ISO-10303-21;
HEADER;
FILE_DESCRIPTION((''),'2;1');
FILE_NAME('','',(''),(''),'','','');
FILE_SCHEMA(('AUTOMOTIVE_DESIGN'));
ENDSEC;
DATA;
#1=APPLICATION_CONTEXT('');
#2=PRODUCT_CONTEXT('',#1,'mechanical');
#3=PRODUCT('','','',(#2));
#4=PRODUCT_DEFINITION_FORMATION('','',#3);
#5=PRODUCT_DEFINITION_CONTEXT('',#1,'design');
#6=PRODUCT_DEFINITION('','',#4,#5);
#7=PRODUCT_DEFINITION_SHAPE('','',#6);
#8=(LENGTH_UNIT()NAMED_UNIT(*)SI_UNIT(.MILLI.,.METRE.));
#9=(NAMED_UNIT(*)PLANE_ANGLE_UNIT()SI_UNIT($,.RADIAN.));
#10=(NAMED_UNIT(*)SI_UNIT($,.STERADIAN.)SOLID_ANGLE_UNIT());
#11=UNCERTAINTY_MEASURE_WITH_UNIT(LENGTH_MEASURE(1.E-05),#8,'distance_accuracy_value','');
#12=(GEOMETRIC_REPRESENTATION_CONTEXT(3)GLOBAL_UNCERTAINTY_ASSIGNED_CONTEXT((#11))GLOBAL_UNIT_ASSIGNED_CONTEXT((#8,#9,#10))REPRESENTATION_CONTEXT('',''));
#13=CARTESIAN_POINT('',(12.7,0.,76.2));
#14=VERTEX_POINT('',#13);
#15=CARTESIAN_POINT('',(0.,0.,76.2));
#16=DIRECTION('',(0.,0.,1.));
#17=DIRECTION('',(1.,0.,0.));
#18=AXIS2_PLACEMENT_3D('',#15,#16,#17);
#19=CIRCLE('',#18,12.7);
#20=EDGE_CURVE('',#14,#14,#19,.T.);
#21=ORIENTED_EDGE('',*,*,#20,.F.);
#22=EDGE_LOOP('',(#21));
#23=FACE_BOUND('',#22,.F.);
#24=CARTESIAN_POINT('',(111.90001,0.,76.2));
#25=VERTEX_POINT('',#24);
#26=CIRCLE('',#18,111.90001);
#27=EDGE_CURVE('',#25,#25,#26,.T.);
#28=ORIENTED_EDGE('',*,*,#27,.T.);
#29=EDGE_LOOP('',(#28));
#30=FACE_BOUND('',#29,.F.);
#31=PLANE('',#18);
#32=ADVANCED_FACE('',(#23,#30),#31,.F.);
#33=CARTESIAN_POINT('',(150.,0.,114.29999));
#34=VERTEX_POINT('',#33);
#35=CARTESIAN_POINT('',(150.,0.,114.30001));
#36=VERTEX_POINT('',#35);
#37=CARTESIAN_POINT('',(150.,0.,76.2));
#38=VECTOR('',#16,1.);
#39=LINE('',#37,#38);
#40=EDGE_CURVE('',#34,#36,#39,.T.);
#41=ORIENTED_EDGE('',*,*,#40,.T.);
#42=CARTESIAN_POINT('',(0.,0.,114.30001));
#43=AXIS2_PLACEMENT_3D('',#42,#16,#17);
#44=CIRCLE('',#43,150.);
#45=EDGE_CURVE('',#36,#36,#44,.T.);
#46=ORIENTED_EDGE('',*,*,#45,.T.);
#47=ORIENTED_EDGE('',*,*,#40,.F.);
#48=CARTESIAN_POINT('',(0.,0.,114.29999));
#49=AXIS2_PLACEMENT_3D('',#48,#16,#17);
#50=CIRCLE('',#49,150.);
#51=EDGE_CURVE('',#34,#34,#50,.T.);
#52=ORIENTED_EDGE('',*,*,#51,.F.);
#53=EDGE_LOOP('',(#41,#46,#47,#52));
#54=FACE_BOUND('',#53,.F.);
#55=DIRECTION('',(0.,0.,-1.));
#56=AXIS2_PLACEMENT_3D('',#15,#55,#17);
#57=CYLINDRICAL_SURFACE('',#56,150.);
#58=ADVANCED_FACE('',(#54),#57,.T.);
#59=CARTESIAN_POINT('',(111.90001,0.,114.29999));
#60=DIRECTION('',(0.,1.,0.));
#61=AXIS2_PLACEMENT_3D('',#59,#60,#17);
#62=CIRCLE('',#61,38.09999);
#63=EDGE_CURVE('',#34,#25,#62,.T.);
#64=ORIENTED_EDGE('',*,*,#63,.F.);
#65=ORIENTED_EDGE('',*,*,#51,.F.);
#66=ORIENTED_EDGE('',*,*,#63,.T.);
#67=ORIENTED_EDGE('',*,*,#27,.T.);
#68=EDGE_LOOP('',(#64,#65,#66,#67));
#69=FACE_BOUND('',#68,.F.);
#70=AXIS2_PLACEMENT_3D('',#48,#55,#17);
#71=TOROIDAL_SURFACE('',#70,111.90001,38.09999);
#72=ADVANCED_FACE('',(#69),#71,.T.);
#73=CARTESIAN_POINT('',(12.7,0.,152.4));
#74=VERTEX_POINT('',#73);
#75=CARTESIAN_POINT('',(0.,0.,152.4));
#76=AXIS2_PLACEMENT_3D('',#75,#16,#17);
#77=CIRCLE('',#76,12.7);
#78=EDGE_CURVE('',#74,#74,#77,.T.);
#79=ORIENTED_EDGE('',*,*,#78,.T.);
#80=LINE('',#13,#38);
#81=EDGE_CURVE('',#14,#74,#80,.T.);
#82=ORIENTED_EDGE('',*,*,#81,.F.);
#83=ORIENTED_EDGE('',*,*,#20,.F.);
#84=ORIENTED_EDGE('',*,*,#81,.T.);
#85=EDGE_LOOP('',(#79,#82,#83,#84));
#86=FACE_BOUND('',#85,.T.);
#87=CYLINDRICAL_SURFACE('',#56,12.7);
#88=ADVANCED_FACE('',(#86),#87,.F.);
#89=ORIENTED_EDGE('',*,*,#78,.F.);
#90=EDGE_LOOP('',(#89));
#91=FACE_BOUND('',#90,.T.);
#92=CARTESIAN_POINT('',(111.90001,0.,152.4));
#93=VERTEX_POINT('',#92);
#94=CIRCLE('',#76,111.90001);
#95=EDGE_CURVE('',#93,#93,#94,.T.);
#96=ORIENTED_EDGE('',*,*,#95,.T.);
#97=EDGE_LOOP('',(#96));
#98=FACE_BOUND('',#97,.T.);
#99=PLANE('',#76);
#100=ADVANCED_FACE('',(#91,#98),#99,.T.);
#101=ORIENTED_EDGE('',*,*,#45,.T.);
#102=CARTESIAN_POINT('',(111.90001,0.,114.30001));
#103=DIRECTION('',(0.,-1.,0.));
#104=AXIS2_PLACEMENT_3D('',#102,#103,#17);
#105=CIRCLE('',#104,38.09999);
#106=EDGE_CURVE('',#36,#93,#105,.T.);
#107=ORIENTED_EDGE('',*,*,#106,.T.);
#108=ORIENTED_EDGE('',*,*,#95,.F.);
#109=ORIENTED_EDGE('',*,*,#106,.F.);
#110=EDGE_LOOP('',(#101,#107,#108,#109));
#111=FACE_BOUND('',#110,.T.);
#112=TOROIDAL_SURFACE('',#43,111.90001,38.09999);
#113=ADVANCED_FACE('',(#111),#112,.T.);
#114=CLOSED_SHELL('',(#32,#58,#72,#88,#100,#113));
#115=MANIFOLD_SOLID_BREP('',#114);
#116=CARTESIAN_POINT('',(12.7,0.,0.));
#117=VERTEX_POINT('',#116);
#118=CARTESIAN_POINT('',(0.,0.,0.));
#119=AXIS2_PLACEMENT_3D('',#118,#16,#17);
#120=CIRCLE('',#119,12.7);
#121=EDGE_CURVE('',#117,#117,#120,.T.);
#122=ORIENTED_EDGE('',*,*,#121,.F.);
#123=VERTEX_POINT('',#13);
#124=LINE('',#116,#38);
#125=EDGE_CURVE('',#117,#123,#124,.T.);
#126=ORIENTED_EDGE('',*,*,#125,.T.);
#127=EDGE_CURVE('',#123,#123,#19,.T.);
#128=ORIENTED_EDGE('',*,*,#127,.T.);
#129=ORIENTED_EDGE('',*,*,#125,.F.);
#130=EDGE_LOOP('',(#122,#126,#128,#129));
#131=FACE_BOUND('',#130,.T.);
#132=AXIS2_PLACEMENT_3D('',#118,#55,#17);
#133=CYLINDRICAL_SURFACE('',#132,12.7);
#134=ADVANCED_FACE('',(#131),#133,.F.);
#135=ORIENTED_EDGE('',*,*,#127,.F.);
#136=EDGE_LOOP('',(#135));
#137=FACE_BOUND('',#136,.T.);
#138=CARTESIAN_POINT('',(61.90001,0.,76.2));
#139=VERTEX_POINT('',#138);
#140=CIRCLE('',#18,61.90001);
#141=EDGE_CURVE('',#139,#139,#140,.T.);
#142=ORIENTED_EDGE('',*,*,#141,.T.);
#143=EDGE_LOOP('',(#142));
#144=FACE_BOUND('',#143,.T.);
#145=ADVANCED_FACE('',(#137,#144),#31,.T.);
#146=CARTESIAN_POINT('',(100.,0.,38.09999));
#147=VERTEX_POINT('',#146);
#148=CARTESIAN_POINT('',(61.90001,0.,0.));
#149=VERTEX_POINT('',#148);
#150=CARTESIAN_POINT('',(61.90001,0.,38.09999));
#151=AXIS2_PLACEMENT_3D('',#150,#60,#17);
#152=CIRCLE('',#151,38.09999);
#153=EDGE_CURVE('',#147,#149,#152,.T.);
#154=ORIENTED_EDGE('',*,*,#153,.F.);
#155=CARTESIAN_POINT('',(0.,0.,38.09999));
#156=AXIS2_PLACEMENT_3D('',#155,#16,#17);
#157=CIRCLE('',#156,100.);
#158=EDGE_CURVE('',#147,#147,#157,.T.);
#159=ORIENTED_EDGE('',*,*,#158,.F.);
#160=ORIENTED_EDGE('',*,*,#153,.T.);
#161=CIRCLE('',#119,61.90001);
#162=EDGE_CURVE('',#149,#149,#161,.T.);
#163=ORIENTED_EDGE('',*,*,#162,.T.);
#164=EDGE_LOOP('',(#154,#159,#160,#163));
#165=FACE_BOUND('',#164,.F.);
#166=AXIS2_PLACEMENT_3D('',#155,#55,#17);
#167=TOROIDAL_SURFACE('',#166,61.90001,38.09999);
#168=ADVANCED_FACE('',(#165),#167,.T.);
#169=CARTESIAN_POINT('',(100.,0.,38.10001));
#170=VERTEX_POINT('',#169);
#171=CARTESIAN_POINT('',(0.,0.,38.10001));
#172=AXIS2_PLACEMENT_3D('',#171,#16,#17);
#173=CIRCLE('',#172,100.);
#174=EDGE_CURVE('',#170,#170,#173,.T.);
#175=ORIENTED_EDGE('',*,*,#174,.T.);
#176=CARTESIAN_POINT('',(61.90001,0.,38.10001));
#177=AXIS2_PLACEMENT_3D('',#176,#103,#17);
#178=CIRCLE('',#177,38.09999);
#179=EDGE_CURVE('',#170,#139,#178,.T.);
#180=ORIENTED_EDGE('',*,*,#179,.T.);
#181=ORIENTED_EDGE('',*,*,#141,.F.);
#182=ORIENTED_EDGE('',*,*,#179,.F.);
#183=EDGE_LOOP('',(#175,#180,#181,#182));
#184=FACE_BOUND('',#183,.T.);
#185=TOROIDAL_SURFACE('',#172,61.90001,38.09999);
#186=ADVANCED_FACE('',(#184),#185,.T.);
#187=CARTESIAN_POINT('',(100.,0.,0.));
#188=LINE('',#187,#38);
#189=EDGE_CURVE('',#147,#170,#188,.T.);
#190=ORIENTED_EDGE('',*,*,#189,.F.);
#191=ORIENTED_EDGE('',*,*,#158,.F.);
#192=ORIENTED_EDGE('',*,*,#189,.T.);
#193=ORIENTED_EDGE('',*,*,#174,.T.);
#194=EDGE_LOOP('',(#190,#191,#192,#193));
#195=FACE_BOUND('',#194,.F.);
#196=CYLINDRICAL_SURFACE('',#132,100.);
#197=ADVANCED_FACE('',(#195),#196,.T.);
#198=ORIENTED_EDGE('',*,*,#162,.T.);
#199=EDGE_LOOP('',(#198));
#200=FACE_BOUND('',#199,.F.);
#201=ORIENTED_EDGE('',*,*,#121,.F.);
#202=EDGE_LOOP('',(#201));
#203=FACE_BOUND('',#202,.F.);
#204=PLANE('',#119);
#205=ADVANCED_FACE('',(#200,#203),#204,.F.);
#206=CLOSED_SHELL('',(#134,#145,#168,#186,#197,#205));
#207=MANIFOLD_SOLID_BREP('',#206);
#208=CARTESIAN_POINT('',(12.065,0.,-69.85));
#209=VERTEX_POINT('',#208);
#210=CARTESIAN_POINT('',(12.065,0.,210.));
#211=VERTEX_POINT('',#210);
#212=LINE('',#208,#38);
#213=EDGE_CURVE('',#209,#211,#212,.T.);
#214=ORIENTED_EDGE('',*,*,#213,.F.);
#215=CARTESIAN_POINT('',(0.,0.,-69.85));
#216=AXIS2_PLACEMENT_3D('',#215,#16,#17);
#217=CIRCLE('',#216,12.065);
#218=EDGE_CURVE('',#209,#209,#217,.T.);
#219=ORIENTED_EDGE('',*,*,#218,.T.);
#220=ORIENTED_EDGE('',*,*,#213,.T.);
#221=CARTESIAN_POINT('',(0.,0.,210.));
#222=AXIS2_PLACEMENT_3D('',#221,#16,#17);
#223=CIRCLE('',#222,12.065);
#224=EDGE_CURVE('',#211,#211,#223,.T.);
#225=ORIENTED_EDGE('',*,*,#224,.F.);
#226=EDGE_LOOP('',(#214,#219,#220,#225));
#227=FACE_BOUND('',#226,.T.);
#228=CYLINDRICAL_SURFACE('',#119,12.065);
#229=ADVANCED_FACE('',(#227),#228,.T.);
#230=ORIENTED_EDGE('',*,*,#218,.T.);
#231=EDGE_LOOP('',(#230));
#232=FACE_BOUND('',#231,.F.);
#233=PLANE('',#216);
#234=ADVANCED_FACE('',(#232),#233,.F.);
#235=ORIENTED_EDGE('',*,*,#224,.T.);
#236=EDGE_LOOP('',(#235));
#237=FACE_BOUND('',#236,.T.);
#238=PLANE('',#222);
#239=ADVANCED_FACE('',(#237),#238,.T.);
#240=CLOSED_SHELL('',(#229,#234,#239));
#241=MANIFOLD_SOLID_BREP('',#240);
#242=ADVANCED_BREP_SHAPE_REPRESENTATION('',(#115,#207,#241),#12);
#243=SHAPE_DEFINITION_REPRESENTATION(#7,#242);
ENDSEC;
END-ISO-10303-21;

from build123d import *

# Parameters (mm, degrees)
F0_R     = 100
F0_R_2   = 12.7
F1_DEPTH = 76.2
F2_R     = 150
F2_R_2   = 100
F2_R_3   = 12.7
F3_DEPTH = 76.2
F4_R     = 38.09999
F5_R     = 38.09999
F0_R_3   = 12.065
F6_DEPTH = 210
F7_DEPTH = 69.85


# Not quite as in the source:
# - a fillet or chamfer is up to 0.001 mm smaller than in the source, because OpenCascade refuses the exact size


with BuildPart() as f1:
    # F0 (on Top) → F1 (new body)
    with BuildSketch(Plane.XY):
        Circle(F0_R)
        Circle(F0_R_2, mode=Mode.SUBTRACT)
    extrude(amount=F1_DEPTH)

    # F4 (radius 38.1 in the source; OpenCascade refuses exactly that, so slightly less here)
    f4_edges = [f1.edges().sort_by_distance(p)[0] for p in [
        (100, 0, 38.1),
        (-100, 0, 0),
        (-100, 0, 76.2),
    ]]
    fillet(f4_edges, radius=F4_R)


with BuildPart() as f3:
    # F2 (on face) → F3 (new body)
    with BuildSketch(Plane.XY.offset(76.2)):
        Circle(F2_R)
        Circle(F2_R_2, mode=Mode.SUBTRACT)
        Circle(F2_R_2)
        Circle(F2_R_3, mode=Mode.SUBTRACT)
    extrude(amount=F3_DEPTH)

    # F5 (radius 38.1 in the source; OpenCascade refuses exactly that, so slightly less here)
    f5_edges = [f3.edges().sort_by_distance(p)[0] for p in [
        (150, 0, 114.3),
        (-150, 0, 76.2),
        (-150, 0, 152.4),
    ]]
    fillet(f5_edges, radius=F5_R)


with BuildPart() as f6:
    # F0 (on Top) → F6 (new body)
    with BuildSketch(Plane.XY):
        Circle(F0_R_3)
    extrude(amount=F6_DEPTH)

    # F7 (add): a face of the model
    f7_faces = [f6.faces().sort_by_distance(p)[0] for p in [
        (0, 0, 0),
    ]]
    extrude(f7_faces, amount=F7_DEPTH)


solid = Compound([f1.part, f3.part, f6.part])
